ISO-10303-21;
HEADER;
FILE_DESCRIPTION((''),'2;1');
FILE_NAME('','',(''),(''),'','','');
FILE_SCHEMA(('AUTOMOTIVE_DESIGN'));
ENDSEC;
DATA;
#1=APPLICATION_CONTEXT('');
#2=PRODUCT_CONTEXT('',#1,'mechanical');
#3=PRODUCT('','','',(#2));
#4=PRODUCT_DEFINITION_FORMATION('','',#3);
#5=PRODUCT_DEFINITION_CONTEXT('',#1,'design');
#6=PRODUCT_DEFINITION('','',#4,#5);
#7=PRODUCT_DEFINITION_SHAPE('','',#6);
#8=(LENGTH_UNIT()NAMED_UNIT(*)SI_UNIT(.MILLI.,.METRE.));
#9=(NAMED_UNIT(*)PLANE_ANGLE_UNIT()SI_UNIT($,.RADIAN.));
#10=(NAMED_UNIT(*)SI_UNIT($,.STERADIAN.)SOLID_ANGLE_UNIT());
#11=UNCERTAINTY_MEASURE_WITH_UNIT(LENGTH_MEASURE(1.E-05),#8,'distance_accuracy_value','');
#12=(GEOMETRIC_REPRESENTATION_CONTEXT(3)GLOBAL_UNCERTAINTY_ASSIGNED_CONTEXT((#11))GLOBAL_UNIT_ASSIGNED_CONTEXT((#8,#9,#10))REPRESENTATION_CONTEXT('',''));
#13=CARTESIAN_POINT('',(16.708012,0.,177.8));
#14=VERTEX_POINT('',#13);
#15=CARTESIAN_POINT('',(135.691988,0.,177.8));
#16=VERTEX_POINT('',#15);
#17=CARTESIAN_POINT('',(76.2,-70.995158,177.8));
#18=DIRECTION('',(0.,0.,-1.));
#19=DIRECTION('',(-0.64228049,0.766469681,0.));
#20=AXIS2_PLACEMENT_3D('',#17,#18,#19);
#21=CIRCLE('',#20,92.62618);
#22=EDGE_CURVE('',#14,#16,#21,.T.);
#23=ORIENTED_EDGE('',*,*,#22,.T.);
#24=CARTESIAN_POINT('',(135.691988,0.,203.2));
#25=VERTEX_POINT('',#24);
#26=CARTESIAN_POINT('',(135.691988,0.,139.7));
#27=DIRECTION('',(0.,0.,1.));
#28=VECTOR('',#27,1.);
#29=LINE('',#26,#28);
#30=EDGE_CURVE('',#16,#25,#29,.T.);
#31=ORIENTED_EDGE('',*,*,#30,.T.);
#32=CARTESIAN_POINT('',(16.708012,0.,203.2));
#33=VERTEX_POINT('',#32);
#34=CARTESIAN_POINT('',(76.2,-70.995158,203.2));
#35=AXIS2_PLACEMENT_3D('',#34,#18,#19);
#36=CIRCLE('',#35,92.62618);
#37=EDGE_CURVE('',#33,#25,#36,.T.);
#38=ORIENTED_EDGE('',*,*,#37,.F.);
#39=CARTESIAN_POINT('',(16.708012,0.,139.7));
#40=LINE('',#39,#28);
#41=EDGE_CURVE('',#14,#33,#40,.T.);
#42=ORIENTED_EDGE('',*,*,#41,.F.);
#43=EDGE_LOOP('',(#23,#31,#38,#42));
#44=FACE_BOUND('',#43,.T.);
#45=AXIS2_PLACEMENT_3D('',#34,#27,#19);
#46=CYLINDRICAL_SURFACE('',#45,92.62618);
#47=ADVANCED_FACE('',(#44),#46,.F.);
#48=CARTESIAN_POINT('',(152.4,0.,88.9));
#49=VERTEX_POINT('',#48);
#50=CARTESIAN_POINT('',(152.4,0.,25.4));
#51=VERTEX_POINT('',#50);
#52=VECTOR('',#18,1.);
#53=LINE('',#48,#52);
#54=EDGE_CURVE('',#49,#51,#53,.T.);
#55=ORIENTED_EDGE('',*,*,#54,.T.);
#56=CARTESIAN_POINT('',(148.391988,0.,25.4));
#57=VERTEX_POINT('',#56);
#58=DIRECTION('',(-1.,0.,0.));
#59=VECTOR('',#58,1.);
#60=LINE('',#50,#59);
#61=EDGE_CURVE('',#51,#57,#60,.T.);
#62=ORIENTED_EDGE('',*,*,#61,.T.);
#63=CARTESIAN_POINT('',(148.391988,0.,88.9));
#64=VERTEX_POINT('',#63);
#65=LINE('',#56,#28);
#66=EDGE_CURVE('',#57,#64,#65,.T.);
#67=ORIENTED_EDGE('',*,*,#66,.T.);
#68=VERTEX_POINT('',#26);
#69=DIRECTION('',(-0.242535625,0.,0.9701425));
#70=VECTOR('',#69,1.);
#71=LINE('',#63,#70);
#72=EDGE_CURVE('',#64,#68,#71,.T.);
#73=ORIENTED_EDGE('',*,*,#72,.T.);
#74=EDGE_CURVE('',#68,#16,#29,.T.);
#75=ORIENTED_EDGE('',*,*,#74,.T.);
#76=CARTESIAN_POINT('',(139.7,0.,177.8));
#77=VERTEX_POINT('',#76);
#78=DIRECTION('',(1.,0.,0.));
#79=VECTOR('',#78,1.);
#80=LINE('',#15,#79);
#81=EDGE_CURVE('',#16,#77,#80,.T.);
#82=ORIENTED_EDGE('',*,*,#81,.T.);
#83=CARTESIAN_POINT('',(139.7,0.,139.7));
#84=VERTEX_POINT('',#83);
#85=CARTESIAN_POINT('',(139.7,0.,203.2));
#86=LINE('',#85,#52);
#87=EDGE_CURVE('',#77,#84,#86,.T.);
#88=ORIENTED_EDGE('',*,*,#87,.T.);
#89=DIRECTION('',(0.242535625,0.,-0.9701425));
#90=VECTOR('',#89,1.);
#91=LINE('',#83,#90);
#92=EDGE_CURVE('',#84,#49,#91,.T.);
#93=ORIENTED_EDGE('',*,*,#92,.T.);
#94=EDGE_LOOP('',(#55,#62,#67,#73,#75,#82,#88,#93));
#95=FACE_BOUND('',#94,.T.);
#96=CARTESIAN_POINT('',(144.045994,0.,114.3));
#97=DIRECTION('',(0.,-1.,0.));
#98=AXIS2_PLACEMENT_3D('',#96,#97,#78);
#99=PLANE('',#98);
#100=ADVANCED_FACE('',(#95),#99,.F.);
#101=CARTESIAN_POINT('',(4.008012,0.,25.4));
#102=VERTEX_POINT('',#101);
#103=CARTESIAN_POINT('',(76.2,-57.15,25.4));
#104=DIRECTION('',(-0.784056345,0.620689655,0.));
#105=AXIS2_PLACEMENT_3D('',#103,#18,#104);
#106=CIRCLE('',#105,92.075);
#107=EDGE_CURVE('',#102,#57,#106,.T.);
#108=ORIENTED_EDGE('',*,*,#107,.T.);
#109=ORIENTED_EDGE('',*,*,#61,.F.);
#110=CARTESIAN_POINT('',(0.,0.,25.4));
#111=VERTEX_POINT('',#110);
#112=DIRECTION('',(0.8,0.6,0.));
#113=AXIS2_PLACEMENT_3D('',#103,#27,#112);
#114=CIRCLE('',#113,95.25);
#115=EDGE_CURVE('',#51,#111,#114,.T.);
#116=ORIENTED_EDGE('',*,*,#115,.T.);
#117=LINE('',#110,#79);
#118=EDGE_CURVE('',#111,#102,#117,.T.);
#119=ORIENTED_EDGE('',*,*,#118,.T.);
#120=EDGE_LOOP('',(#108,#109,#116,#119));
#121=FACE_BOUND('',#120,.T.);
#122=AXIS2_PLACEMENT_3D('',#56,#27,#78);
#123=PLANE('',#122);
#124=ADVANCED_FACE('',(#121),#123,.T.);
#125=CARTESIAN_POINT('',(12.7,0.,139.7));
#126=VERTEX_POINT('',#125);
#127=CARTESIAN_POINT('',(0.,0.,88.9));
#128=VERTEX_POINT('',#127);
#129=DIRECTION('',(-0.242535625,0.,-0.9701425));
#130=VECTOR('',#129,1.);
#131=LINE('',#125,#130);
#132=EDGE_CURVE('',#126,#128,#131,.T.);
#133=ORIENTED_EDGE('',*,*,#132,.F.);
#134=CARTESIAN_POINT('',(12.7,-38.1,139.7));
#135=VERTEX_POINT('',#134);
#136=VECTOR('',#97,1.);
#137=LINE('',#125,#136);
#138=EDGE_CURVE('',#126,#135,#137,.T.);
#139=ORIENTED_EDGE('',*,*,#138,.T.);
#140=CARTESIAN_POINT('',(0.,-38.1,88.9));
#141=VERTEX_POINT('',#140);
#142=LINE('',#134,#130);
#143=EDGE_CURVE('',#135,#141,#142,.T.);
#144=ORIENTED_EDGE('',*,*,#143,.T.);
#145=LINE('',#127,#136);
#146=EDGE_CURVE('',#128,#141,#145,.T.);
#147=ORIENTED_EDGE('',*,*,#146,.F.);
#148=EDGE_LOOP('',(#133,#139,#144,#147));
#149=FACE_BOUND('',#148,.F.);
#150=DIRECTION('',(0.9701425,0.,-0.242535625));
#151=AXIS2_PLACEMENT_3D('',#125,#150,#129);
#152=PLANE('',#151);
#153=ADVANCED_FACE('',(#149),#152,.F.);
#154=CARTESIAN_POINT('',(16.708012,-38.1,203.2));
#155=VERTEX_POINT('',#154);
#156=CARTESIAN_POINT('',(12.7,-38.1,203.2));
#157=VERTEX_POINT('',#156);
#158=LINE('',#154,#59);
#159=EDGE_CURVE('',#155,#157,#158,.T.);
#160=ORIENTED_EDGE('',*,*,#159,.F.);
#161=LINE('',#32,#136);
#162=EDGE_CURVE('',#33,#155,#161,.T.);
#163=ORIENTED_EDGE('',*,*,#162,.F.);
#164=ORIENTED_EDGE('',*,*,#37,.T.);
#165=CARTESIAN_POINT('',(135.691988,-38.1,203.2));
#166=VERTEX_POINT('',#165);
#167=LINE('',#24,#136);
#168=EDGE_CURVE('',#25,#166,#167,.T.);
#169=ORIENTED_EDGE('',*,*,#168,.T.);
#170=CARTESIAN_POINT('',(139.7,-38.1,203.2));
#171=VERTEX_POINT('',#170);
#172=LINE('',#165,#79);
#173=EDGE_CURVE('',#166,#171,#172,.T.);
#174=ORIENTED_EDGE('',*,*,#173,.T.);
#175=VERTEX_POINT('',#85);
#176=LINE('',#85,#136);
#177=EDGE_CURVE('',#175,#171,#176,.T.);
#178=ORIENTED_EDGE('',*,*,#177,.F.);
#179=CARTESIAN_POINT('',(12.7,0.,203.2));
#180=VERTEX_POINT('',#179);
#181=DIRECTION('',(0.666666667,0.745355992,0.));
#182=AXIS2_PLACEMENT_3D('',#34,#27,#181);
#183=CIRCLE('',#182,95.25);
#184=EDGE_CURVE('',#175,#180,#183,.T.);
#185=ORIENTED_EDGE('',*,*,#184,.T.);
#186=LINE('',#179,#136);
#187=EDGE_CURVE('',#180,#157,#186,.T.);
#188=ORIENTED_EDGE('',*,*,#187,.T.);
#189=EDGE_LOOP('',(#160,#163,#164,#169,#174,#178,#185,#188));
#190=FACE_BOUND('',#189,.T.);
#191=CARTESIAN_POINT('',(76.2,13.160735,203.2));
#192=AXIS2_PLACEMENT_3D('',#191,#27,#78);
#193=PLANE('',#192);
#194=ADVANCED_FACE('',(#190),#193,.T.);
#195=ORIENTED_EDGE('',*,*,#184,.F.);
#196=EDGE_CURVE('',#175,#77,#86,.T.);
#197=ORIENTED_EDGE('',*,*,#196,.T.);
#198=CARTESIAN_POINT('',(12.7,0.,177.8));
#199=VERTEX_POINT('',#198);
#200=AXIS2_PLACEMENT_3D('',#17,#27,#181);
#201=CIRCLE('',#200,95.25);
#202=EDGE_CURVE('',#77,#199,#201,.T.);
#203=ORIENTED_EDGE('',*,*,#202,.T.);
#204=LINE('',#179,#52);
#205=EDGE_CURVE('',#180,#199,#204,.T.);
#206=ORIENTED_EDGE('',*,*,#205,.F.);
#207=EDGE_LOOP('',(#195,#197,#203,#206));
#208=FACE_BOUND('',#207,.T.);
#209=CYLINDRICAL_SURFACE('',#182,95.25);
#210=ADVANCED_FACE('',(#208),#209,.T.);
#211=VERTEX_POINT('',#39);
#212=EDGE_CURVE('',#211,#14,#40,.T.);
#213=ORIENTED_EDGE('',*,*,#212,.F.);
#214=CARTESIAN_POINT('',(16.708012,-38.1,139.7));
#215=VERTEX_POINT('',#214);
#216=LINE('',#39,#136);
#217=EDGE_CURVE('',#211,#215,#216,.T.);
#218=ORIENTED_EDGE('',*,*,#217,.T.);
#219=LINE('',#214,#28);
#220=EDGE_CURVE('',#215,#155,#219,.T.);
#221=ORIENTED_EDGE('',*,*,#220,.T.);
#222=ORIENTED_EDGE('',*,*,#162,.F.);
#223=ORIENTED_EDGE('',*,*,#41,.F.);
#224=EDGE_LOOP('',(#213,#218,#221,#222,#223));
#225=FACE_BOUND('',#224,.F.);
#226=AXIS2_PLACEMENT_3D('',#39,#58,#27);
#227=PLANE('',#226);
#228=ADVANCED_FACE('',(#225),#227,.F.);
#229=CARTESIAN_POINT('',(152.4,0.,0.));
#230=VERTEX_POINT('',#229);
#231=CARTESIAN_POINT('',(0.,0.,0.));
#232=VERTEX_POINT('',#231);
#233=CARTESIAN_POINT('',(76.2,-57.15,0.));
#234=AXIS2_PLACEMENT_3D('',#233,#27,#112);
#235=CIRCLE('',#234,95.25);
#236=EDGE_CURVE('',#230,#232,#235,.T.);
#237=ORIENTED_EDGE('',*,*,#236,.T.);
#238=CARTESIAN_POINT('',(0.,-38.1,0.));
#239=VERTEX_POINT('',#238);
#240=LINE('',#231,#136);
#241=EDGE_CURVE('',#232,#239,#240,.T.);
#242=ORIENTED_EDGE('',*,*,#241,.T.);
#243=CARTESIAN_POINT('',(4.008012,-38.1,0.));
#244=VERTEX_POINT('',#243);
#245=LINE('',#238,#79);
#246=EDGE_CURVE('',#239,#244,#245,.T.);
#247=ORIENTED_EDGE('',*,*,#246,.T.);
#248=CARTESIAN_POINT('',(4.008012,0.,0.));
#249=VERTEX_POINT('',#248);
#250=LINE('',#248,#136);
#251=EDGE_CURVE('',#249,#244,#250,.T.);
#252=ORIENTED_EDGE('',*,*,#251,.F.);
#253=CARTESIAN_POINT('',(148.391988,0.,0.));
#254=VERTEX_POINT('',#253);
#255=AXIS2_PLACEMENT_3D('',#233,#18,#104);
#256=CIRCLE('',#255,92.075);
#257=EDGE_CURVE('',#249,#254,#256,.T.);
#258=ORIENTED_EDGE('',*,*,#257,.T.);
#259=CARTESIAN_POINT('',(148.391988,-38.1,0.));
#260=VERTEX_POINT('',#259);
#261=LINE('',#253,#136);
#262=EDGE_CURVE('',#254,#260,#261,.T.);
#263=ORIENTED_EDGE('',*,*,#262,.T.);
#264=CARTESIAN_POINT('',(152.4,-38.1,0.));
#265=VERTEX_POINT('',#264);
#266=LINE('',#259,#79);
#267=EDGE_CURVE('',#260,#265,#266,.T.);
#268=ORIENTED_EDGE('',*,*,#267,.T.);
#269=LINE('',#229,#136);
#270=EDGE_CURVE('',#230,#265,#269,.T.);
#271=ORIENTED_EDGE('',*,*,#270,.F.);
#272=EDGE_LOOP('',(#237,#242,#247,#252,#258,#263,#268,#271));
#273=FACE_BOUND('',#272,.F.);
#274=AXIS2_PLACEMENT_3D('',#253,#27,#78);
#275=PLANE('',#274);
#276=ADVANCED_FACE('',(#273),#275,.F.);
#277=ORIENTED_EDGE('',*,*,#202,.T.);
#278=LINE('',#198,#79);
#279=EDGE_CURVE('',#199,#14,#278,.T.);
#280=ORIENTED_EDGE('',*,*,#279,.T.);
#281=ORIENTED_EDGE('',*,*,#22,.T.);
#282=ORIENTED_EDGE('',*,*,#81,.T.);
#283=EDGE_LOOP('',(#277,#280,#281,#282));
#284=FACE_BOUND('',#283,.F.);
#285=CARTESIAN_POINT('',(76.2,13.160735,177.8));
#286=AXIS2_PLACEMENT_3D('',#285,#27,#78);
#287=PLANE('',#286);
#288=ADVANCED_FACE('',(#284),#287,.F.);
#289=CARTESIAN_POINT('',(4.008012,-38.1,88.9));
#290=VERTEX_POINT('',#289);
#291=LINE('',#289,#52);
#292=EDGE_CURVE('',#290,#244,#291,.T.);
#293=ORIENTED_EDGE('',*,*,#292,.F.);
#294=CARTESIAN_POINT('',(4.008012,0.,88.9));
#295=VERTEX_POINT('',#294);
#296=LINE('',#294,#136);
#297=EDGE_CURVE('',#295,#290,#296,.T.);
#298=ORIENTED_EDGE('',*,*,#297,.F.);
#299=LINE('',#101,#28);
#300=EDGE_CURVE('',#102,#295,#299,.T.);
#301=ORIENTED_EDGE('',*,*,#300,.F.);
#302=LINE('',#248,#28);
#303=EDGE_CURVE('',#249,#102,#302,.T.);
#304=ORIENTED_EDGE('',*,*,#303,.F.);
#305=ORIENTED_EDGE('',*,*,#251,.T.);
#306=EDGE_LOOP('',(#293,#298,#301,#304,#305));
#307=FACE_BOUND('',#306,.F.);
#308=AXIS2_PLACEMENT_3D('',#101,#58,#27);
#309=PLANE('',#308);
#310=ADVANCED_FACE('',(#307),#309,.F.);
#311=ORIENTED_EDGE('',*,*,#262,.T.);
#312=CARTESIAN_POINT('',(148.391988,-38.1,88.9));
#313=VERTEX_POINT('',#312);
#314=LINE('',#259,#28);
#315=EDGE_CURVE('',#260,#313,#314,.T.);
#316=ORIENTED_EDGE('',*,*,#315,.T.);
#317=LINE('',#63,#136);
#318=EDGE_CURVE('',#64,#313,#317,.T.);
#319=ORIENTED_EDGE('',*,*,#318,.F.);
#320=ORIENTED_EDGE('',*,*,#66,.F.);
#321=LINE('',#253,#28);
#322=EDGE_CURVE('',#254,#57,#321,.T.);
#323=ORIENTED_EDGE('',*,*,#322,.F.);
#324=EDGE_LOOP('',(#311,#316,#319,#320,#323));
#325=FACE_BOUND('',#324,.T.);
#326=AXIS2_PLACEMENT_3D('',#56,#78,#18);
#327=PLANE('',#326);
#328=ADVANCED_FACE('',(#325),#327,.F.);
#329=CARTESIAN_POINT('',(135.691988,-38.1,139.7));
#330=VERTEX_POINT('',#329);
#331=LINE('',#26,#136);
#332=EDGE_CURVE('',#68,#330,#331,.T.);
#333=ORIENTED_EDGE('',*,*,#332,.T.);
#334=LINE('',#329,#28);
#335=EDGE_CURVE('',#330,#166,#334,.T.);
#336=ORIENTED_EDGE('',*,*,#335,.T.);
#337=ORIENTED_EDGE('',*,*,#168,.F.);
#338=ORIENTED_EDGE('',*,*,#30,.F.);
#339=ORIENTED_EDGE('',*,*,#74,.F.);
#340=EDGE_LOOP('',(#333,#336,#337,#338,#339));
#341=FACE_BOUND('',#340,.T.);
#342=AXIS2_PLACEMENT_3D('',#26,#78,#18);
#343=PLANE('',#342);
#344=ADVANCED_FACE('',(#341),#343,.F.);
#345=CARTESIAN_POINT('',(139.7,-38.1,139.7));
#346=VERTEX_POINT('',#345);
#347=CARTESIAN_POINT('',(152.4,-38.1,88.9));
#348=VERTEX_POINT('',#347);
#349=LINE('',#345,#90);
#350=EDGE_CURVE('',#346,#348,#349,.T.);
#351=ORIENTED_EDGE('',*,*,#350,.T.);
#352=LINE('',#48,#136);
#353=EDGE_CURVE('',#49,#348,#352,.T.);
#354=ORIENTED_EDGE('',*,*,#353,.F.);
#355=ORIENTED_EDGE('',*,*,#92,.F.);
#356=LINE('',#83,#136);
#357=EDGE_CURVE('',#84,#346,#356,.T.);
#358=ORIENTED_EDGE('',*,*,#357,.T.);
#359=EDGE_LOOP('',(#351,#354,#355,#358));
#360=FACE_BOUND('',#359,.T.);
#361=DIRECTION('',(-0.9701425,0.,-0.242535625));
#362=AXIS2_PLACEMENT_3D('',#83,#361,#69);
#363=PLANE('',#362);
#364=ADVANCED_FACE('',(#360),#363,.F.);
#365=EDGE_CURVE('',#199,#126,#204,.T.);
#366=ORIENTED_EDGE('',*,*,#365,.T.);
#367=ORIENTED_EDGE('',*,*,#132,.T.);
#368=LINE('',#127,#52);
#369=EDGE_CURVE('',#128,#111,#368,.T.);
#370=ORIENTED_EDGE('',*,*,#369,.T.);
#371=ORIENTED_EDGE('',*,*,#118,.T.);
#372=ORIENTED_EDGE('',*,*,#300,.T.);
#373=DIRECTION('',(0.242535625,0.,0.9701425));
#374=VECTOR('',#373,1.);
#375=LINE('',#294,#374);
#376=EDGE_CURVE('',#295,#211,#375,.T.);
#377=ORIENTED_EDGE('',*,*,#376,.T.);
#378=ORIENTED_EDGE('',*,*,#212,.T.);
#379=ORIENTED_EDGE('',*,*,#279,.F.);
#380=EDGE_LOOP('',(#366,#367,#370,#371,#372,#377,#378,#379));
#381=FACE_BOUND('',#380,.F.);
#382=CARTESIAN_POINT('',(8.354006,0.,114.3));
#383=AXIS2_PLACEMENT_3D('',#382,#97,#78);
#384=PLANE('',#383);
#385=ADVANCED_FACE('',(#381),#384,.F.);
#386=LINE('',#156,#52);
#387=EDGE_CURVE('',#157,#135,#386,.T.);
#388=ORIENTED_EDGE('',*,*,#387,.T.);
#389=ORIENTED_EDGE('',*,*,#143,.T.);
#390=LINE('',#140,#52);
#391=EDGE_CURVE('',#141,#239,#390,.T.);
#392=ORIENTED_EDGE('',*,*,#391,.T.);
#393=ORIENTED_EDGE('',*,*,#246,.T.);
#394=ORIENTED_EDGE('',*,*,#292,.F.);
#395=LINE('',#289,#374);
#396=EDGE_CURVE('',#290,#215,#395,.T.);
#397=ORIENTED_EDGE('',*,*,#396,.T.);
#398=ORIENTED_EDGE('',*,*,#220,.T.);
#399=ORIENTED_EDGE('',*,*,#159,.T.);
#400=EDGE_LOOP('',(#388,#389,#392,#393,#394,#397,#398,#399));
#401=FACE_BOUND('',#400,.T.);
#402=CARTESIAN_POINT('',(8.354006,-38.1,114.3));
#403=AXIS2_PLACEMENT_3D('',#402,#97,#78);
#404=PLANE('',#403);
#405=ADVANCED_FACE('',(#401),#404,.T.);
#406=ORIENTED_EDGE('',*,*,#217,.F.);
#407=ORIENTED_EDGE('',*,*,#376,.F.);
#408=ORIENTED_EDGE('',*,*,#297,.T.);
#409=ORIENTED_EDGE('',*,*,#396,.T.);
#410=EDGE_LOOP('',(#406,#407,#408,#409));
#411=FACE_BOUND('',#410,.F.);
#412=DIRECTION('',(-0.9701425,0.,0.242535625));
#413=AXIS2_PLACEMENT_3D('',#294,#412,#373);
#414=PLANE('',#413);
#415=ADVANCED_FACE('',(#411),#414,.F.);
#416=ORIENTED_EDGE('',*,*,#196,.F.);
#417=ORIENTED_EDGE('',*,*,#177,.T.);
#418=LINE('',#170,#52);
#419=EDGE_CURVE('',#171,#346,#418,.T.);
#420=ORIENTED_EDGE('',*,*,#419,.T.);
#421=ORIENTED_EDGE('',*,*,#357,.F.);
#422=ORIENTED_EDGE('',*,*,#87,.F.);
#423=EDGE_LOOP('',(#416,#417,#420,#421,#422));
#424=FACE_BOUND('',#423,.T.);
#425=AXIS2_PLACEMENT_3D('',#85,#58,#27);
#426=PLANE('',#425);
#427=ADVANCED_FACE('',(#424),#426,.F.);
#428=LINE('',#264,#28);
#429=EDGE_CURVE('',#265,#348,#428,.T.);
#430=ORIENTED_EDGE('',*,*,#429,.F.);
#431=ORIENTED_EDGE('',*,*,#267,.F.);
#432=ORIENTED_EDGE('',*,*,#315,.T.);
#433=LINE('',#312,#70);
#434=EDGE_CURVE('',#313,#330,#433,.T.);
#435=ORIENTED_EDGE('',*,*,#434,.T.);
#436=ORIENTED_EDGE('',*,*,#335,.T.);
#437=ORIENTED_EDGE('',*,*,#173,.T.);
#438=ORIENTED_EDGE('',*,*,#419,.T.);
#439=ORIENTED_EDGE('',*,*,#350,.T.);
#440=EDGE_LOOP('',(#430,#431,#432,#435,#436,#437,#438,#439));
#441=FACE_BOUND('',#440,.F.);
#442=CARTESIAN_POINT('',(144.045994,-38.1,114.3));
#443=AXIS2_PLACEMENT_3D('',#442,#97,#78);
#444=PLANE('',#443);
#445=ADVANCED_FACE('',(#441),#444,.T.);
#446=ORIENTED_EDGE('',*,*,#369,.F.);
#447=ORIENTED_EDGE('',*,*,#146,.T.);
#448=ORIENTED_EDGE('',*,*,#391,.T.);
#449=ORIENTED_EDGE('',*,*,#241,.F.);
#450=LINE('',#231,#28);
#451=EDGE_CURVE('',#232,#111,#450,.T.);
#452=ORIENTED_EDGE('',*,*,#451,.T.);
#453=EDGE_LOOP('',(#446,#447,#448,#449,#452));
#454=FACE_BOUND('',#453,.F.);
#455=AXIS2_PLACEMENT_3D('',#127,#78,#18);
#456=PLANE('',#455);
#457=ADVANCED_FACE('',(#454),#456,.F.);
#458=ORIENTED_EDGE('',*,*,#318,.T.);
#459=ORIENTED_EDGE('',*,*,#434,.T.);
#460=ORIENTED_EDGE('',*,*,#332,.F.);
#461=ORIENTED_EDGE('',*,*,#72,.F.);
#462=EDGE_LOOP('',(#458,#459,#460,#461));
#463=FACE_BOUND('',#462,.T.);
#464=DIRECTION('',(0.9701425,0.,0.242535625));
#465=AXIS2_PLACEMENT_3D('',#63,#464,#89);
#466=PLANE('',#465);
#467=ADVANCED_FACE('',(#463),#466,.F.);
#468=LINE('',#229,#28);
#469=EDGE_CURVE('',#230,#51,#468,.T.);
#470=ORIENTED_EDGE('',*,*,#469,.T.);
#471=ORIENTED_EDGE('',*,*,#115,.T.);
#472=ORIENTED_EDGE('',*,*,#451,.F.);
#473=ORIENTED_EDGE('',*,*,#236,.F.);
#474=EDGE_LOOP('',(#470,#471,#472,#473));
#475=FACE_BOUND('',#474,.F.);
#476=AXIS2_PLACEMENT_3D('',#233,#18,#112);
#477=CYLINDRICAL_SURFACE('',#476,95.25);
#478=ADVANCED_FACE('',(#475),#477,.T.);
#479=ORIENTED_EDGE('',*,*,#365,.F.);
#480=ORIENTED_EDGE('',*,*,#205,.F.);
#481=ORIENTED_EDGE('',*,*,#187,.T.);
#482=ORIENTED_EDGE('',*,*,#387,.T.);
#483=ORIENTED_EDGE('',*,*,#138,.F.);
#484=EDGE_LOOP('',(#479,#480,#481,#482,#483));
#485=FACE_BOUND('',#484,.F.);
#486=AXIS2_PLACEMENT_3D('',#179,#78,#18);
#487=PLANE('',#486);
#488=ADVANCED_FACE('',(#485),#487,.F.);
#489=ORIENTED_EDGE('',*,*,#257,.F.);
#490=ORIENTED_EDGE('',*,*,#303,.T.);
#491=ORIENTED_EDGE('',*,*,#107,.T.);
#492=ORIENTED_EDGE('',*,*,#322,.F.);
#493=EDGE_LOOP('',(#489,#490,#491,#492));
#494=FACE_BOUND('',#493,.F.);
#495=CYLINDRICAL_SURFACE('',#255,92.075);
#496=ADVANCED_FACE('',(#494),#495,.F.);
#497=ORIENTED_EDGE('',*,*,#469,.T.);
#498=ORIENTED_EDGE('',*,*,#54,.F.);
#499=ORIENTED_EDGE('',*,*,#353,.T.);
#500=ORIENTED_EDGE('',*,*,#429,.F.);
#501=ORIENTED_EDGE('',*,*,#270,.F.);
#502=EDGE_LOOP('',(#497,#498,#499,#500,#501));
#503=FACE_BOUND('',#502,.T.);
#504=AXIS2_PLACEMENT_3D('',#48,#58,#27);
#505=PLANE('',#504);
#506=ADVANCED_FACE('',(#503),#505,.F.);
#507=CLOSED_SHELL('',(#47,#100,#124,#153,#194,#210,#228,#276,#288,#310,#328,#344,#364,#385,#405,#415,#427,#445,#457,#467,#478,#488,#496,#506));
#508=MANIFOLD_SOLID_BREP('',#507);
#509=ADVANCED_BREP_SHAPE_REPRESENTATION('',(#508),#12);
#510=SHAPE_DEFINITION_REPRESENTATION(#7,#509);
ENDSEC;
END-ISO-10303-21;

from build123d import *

# Parameters (mm, degrees)
F1_DEPTH = 25.4
F2_DEPTH = 38.1
F4_DEPTH = 38.1
F7_DEPTH = 25.4


# Not quite as in the source:
# - a pattern or mirror of a feature is missing from the dataset's text; its kind, count and spacing are read off the source's solid


with BuildPart() as f1:
    # F0 (on Top) → F1 (new body)
    with BuildSketch(Plane.XY):
        with BuildLine():
            Line((148.3919879557, 0), (152.4, 0))
            ThreePointArc((152.4, 0), (76.2, 38.1), (0, 0))
            Line((0, 0), (4.0080120443, 0))
            ThreePointArc((4.0080120443, 0), (76.2, 34.925), (148.3919879557, 0))
        make_face()
    extrude(amount=F1_DEPTH)

    # F2 (add): faces of the model
    f2_faces = [f1.faces().sort_by_distance(p)[0] for p in [
        (150.3959939779, 0, 12.7),
        (2.0040060221, 0, 12.7),
    ]]
    extrude(f2_faces, amount=F2_DEPTH)

    # F3 (on Front) → F4 (join)
    with BuildSketch(Plane.XZ):
        Polygon((0, 25.4), (4.0080120443, 25.4), (4.0080120443, 88.9), (16.7080120443, 139.7), (16.7080120443, 203.2), (12.7, 203.2), (12.7, 139.7), (0, 88.9), align=None)
    f4 = extrude(amount=F4_DEPTH)

    # F4_copies: F4 across plane
    add(f4.mirror(Plane(origin=(76.2, 0, 0), x_dir=(0, 0, 1), z_dir=(1, 0, 0))))

    # F6 (on face) → F7 (join)
    with BuildSketch(Plane.XY.offset(203.2)):
        with BuildLine():
            ThreePointArc((16.7080120443, 0), (76.2, 21.631021226), (135.6919879557, 0))
            Line((135.6919879557, 0), (139.7, 0))
            ThreePointArc((139.7, 0), (76.2, 24.2548417144), (12.7, 0))
            Line((12.7, 0), (16.7080120443, 0))
        make_face()
    extrude(amount=-F7_DEPTH)


solid = f1.part
